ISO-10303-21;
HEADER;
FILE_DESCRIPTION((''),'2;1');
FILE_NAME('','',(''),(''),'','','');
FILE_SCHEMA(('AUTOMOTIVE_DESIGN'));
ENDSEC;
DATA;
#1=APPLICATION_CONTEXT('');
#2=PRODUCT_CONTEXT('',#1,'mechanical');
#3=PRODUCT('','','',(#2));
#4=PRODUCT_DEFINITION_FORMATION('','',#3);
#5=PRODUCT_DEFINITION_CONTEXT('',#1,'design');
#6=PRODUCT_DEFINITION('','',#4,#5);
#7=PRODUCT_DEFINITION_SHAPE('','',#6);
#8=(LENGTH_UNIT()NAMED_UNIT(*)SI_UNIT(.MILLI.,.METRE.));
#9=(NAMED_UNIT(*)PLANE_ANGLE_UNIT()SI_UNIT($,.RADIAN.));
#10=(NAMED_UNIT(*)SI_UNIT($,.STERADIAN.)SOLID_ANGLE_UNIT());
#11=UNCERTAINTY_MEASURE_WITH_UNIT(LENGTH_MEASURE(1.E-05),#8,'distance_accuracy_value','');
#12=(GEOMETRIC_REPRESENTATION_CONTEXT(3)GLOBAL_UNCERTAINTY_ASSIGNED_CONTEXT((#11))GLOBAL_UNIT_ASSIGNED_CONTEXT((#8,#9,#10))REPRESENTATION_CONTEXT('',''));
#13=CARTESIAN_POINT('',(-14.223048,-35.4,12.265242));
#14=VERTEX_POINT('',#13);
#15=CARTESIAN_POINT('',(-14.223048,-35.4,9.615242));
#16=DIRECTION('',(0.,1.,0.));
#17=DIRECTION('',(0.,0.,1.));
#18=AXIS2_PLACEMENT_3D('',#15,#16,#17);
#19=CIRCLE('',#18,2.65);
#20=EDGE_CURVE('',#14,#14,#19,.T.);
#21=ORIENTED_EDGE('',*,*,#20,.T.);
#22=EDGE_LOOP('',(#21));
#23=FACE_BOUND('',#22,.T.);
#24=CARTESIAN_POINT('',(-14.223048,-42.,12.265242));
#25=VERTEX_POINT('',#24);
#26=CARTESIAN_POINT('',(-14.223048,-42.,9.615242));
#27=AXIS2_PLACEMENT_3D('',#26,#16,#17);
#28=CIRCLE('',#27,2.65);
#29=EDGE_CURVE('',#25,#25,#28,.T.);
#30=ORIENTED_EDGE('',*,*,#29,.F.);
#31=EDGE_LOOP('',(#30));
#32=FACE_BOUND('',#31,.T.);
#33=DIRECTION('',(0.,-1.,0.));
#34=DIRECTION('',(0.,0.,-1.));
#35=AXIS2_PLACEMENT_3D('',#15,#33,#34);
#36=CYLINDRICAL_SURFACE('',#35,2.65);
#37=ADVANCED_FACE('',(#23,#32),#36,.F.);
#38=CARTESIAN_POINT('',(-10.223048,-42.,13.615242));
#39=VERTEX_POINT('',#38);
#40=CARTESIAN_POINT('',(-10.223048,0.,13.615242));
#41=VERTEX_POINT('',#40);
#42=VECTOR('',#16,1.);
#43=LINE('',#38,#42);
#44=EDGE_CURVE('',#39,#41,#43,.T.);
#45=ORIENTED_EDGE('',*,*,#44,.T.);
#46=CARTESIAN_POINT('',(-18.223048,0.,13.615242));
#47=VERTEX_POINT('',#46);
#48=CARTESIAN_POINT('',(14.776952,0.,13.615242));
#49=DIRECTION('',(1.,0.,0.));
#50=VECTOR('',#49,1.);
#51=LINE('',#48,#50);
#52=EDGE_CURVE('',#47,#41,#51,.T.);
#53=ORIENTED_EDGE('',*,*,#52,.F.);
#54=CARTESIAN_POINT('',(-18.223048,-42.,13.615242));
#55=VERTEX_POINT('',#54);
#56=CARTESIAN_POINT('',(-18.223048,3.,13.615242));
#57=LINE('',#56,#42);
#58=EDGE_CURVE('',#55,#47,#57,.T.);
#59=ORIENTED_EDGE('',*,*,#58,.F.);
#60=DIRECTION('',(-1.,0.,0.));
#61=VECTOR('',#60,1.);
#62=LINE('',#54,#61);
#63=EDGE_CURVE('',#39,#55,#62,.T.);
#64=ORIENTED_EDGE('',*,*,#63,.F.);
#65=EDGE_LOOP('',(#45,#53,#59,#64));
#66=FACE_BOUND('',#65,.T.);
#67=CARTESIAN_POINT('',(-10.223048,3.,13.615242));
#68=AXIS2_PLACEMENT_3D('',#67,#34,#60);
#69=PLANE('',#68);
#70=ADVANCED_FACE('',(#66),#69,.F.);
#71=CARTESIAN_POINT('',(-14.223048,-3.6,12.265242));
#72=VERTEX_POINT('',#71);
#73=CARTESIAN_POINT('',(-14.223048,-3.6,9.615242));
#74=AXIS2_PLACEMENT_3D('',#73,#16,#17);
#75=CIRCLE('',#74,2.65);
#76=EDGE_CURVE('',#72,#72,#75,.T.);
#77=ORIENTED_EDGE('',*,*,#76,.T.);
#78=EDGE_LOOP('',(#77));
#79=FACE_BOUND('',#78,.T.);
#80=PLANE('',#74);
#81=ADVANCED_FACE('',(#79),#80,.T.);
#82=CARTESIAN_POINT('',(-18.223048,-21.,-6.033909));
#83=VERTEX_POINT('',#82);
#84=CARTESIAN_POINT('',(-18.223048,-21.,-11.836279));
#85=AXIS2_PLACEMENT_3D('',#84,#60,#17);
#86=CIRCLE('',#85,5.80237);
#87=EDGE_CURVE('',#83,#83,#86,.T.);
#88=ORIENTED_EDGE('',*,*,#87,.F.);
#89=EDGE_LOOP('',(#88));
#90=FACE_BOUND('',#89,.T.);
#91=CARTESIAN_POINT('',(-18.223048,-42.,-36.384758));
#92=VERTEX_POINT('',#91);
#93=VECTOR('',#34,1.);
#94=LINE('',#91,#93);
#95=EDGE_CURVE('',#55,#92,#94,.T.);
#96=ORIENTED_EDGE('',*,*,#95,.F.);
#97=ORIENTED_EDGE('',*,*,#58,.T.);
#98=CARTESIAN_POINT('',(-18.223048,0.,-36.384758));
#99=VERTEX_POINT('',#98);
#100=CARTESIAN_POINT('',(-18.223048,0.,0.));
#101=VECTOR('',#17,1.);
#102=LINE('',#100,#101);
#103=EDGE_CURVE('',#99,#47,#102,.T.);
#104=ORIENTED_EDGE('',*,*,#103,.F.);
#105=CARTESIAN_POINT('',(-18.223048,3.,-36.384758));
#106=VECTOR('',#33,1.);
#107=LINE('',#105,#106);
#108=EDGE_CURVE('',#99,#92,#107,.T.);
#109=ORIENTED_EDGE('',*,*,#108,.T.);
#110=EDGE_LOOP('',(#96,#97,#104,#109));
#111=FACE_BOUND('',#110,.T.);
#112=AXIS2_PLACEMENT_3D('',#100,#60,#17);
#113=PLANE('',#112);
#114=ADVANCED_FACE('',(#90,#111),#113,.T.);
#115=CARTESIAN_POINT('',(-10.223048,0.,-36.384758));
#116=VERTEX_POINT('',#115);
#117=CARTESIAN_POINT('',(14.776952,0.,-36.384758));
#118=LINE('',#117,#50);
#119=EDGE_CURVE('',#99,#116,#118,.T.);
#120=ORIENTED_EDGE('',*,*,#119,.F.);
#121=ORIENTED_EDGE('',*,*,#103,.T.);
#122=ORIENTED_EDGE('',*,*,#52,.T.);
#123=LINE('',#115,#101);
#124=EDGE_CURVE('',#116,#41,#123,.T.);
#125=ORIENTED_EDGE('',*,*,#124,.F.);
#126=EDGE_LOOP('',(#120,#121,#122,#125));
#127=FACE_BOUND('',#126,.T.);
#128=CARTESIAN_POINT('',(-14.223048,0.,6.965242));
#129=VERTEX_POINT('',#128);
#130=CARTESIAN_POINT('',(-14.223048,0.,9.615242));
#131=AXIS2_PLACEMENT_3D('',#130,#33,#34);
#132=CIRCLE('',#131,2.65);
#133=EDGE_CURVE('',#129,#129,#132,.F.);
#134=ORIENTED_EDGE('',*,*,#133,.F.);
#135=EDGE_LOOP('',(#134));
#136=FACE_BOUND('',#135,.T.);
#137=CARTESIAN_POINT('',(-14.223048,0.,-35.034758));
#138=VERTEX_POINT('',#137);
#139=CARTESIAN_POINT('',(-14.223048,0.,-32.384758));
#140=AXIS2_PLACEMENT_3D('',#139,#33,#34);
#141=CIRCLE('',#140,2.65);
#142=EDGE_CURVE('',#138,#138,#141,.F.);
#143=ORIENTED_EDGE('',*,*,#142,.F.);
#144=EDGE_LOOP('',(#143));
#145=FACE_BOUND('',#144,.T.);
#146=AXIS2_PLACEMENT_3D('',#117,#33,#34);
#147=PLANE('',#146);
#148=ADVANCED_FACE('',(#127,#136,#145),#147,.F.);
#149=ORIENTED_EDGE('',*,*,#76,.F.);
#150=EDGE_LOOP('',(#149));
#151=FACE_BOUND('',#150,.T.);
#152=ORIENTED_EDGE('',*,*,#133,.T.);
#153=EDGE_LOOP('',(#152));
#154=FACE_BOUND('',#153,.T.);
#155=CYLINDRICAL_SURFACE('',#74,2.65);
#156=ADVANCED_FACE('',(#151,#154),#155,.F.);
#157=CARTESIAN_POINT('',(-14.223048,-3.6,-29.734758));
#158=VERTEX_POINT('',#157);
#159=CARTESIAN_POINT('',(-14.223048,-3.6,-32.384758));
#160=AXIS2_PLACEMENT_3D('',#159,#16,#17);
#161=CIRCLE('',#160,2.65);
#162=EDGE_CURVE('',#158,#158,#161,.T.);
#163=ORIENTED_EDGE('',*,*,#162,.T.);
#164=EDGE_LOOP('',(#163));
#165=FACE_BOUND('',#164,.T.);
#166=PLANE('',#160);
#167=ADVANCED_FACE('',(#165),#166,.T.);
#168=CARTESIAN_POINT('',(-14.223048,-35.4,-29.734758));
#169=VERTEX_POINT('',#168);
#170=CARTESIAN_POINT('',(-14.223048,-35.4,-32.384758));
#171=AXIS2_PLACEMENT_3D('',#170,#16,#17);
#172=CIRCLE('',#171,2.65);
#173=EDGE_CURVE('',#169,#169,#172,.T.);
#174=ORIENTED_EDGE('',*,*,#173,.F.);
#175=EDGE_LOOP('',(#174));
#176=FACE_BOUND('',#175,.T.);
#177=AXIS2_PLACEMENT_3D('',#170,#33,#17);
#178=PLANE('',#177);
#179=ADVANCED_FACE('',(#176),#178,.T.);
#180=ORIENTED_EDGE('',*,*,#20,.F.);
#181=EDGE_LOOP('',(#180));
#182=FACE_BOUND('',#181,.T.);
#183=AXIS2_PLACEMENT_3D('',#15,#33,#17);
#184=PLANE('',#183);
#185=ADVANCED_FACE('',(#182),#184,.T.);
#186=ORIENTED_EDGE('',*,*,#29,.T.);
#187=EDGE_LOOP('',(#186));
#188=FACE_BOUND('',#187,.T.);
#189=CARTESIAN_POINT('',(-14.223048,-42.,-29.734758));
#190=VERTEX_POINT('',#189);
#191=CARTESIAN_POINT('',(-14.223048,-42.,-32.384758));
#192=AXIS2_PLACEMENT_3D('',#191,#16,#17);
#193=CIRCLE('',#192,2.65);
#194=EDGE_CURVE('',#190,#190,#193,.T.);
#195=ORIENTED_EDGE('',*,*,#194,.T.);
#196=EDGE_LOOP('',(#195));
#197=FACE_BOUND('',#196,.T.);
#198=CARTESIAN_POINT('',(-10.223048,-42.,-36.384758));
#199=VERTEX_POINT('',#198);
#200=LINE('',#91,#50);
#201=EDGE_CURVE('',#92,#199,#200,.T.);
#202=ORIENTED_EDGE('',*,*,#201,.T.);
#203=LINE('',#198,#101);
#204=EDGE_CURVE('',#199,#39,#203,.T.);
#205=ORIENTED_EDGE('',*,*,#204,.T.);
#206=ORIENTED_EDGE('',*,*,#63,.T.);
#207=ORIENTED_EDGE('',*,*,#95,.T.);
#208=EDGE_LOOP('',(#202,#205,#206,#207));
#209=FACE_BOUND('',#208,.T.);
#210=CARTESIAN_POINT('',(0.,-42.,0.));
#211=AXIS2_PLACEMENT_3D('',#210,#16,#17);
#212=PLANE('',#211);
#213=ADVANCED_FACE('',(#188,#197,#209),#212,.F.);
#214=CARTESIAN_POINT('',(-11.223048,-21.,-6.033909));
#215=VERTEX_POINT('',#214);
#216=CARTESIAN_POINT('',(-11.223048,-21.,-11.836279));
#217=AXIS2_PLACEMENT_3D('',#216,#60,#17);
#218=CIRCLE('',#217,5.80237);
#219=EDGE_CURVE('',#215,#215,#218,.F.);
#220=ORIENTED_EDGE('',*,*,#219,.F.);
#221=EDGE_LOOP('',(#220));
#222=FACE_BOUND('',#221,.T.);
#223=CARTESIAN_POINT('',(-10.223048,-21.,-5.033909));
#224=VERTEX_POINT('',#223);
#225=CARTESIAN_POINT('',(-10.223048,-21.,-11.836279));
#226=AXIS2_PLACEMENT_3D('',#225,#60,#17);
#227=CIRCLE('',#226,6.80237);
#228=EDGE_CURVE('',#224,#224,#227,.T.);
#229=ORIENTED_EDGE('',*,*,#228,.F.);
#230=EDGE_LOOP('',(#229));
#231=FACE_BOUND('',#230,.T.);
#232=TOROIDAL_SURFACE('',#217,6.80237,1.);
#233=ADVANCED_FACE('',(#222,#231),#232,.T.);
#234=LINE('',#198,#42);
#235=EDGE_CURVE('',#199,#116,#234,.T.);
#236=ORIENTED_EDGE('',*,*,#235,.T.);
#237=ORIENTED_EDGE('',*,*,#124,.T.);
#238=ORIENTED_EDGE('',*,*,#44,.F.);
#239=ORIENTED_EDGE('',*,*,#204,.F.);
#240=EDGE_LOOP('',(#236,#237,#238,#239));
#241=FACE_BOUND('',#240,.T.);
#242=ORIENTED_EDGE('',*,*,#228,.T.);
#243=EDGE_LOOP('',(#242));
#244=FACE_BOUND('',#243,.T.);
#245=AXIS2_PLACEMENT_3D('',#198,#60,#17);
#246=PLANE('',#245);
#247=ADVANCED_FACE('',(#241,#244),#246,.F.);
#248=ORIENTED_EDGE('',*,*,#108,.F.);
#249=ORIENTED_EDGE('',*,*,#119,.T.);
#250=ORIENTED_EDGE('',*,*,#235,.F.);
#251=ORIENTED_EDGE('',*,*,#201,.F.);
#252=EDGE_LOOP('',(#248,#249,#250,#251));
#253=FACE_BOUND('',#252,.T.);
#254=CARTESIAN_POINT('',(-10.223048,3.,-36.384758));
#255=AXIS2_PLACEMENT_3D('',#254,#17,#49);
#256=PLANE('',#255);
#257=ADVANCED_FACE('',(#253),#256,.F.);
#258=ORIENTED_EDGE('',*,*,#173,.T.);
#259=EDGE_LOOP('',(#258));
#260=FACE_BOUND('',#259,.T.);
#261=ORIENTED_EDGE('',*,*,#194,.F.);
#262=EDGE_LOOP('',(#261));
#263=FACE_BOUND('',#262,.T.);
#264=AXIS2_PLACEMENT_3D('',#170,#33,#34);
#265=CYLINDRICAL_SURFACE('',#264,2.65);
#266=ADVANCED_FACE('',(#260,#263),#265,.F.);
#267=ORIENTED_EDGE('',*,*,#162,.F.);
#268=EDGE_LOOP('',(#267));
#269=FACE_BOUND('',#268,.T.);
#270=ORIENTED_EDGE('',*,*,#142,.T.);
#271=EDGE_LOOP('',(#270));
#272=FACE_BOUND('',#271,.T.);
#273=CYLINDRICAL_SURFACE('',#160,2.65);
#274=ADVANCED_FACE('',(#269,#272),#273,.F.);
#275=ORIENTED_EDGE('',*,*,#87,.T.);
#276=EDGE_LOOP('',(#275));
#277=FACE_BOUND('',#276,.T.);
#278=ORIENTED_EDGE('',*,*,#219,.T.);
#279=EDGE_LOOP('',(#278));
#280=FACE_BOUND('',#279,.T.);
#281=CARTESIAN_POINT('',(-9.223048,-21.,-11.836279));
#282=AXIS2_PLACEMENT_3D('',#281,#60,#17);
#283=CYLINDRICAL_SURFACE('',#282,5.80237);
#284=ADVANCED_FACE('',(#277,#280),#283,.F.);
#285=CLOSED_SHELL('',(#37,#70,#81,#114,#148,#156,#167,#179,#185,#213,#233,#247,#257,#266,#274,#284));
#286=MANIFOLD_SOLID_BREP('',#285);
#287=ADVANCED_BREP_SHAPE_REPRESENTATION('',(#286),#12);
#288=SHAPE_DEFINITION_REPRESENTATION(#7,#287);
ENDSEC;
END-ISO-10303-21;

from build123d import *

# Parameters (mm, degrees)
SKETCH1_W           = 25
SKETCH1_H           = 50
SKETCH1_R           = 3.4
BOSS_EXTRUDE1_DEPTH = 3
SKETCH2_W           = 50
SKETCH2_H           = 3
BOSS_EXTRUDE2_DEPTH = 8
SKETCH3_W           = 8
SKETCH3_H           = 50
BOSS_EXTRUDE3_DEPTH = 42
SKETCH4_R           = 2.65
CUT_EXTRUDE1_DEPTH  = 6.6
SKETCH5_R           = 5.802370205
CUT_EXTRUDE2_DEPTH  = 9
FILLET2_R           = 1
SKETCH6_R           = 12.6
BOSS_EXTRUDE4_DEPTH = 2
FILLET4_R           = 1
SKETCH8_R           = 1.589780168
SKETCH8_R_2         = 1.777428262
CUT_EXTRUDE3_DEPTH  = 10
SKETCH9_W           = 49.021678163
SKETCH9_H           = 20.976854622
CUT_EXTRUDE4_DEPTH  = 68.79439129


with BuildPart() as part:
    # Sketch1 → Boss-Extrude1 (new body)
    with BuildSketch(Plane(origin=(0, 0, 0), x_dir=(1, 0, 0), z_dir=(0, 1, 0))):
        with Locations((2.276951673, 11.384758364)):
            Rectangle(SKETCH1_W, SKETCH1_H)
        with Locations(Location((1.276951673, 11.384758364, 0), (0, 0, 270))):
            Circle(SKETCH1_R, mode=Mode.SUBTRACT)
    extrude(amount=BOSS_EXTRUDE1_DEPTH)

    # Sketch2 → Boss-Extrude2 (add)
    with BuildSketch(Plane.ZY.offset(10.223048327)):
        with Locations((-11.384758364, 1.5)):
            Rectangle(SKETCH2_W, SKETCH2_H)
    extrude(amount=BOSS_EXTRUDE2_DEPTH)

    # Sketch3 → Boss-Extrude3 (add)
    with BuildSketch(Plane.XZ):
        with Locations((-14.223048327, -11.384758364)):
            Rectangle(SKETCH3_W, SKETCH3_H)
    extrude(amount=BOSS_EXTRUDE3_DEPTH)

    # Sketch4 → Cut-Extrude1 (cut)
    with BuildSketch(Plane(origin=(0, 3, 0), x_dir=(1, 0, 0), z_dir=(0, 1, 0))):
        with Locations(Location((-14.223048327, 32.384758364, 0), (0, 0, 270))):
            Circle(SKETCH4_R)
        with Locations(Location((-14.223048327, -9.615241636, 0), (0, 0, 270))):
            Circle(SKETCH4_R)
    cut_extrude1 = extrude(amount=-CUT_EXTRUDE1_DEPTH, mode=Mode.SUBTRACT)

    # Mirror1: Cut-Extrude1 across plane
    add(cut_extrude1.mirror(Plane.ZX.offset(-19.5)), mode=Mode.SUBTRACT)

    # Sketch5 → Cut-Extrude2 (cut)
    with BuildSketch(Plane.ZY.offset(18.223048327)):
        with Locations((-11.836279124, -21)):
            Circle(SKETCH5_R)
    extrude(amount=-CUT_EXTRUDE2_DEPTH, mode=Mode.SUBTRACT)

    # Fillet2
    fillet2_edges = [part.edges().sort_by_distance(p)[0] for p in [
        (-10.223048327, -21, -17.638649329),
    ]]
    fillet(fillet2_edges, radius=FILLET2_R)

    # Mirror2: Cut-Extrude1 across plane
    add(cut_extrude1.mirror(Plane.ZY.offset(1.723048327)), mode=Mode.SUBTRACT)

    # Sketch6 → Boss-Extrude4 (add)
    with BuildSketch(Plane(origin=(0, 3, 0), x_dir=(1, 0, 0), z_dir=(0, 1, 0))):
        with BuildLine():
            Line((14.776951673, 5.825082115), (14.776951673, 16.944434614))
            ThreePointArc((14.776951673, 16.944434614), (-13.323048327, 11.384758364), (14.776951673, 5.825082115))
        make_face()
        with Locations(Location((1.276951673, 11.384758364, 0), (0, 0, 270))):
            Circle(SKETCH6_R, mode=Mode.SUBTRACT)
    extrude(amount=BOSS_EXTRUDE4_DEPTH)

    # Fillet4
    # the kernel refuses this fillet: 1 mm, written as the material it takes off along each edge
    with BuildSketch(Plane(origin=(14.776951673, 5, -3.325082115), x_dir=(0, -1, 0), z_dir=(0, 0, -1))) as fillet4_piece_1:
        with BuildLine():
            CenterArc((FILLET4_R, FILLET4_R), FILLET4_R, 180, 90)
            Line((0, FILLET4_R), (0, 0))
            Line((0, 0), (FILLET4_R, 0))
        make_face()
    extrude(amount=16.119352499, mode=Mode.SUBTRACT)

    # Sketch8 → Cut-Extrude3 (cut)
    with BuildSketch(Plane(origin=(0, 3, 0), x_dir=(1, 0, 0), z_dir=(0, 1, 0))):
        with Locations(Location((1.276951673, 19.884758364, 0), (0, 0, 270))):
            Circle(SKETCH8_R)
        with Locations(Location((1.276951673, 2.884758364, 0), (0, 0, 270))):
            Circle(SKETCH8_R_2)
    extrude(amount=-CUT_EXTRUDE3_DEPTH, mode=Mode.SUBTRACT)

    # Sketch9 → Cut-Extrude4 (cut, through all)
    with BuildSketch(Plane.XY.offset(13.615241636)):
        with Locations((-9.733887409, 10.488427311)):
            Rectangle(SKETCH9_W, SKETCH9_H)
    extrude(amount=-CUT_EXTRUDE4_DEPTH, mode=Mode.SUBTRACT)


solid = part.part
